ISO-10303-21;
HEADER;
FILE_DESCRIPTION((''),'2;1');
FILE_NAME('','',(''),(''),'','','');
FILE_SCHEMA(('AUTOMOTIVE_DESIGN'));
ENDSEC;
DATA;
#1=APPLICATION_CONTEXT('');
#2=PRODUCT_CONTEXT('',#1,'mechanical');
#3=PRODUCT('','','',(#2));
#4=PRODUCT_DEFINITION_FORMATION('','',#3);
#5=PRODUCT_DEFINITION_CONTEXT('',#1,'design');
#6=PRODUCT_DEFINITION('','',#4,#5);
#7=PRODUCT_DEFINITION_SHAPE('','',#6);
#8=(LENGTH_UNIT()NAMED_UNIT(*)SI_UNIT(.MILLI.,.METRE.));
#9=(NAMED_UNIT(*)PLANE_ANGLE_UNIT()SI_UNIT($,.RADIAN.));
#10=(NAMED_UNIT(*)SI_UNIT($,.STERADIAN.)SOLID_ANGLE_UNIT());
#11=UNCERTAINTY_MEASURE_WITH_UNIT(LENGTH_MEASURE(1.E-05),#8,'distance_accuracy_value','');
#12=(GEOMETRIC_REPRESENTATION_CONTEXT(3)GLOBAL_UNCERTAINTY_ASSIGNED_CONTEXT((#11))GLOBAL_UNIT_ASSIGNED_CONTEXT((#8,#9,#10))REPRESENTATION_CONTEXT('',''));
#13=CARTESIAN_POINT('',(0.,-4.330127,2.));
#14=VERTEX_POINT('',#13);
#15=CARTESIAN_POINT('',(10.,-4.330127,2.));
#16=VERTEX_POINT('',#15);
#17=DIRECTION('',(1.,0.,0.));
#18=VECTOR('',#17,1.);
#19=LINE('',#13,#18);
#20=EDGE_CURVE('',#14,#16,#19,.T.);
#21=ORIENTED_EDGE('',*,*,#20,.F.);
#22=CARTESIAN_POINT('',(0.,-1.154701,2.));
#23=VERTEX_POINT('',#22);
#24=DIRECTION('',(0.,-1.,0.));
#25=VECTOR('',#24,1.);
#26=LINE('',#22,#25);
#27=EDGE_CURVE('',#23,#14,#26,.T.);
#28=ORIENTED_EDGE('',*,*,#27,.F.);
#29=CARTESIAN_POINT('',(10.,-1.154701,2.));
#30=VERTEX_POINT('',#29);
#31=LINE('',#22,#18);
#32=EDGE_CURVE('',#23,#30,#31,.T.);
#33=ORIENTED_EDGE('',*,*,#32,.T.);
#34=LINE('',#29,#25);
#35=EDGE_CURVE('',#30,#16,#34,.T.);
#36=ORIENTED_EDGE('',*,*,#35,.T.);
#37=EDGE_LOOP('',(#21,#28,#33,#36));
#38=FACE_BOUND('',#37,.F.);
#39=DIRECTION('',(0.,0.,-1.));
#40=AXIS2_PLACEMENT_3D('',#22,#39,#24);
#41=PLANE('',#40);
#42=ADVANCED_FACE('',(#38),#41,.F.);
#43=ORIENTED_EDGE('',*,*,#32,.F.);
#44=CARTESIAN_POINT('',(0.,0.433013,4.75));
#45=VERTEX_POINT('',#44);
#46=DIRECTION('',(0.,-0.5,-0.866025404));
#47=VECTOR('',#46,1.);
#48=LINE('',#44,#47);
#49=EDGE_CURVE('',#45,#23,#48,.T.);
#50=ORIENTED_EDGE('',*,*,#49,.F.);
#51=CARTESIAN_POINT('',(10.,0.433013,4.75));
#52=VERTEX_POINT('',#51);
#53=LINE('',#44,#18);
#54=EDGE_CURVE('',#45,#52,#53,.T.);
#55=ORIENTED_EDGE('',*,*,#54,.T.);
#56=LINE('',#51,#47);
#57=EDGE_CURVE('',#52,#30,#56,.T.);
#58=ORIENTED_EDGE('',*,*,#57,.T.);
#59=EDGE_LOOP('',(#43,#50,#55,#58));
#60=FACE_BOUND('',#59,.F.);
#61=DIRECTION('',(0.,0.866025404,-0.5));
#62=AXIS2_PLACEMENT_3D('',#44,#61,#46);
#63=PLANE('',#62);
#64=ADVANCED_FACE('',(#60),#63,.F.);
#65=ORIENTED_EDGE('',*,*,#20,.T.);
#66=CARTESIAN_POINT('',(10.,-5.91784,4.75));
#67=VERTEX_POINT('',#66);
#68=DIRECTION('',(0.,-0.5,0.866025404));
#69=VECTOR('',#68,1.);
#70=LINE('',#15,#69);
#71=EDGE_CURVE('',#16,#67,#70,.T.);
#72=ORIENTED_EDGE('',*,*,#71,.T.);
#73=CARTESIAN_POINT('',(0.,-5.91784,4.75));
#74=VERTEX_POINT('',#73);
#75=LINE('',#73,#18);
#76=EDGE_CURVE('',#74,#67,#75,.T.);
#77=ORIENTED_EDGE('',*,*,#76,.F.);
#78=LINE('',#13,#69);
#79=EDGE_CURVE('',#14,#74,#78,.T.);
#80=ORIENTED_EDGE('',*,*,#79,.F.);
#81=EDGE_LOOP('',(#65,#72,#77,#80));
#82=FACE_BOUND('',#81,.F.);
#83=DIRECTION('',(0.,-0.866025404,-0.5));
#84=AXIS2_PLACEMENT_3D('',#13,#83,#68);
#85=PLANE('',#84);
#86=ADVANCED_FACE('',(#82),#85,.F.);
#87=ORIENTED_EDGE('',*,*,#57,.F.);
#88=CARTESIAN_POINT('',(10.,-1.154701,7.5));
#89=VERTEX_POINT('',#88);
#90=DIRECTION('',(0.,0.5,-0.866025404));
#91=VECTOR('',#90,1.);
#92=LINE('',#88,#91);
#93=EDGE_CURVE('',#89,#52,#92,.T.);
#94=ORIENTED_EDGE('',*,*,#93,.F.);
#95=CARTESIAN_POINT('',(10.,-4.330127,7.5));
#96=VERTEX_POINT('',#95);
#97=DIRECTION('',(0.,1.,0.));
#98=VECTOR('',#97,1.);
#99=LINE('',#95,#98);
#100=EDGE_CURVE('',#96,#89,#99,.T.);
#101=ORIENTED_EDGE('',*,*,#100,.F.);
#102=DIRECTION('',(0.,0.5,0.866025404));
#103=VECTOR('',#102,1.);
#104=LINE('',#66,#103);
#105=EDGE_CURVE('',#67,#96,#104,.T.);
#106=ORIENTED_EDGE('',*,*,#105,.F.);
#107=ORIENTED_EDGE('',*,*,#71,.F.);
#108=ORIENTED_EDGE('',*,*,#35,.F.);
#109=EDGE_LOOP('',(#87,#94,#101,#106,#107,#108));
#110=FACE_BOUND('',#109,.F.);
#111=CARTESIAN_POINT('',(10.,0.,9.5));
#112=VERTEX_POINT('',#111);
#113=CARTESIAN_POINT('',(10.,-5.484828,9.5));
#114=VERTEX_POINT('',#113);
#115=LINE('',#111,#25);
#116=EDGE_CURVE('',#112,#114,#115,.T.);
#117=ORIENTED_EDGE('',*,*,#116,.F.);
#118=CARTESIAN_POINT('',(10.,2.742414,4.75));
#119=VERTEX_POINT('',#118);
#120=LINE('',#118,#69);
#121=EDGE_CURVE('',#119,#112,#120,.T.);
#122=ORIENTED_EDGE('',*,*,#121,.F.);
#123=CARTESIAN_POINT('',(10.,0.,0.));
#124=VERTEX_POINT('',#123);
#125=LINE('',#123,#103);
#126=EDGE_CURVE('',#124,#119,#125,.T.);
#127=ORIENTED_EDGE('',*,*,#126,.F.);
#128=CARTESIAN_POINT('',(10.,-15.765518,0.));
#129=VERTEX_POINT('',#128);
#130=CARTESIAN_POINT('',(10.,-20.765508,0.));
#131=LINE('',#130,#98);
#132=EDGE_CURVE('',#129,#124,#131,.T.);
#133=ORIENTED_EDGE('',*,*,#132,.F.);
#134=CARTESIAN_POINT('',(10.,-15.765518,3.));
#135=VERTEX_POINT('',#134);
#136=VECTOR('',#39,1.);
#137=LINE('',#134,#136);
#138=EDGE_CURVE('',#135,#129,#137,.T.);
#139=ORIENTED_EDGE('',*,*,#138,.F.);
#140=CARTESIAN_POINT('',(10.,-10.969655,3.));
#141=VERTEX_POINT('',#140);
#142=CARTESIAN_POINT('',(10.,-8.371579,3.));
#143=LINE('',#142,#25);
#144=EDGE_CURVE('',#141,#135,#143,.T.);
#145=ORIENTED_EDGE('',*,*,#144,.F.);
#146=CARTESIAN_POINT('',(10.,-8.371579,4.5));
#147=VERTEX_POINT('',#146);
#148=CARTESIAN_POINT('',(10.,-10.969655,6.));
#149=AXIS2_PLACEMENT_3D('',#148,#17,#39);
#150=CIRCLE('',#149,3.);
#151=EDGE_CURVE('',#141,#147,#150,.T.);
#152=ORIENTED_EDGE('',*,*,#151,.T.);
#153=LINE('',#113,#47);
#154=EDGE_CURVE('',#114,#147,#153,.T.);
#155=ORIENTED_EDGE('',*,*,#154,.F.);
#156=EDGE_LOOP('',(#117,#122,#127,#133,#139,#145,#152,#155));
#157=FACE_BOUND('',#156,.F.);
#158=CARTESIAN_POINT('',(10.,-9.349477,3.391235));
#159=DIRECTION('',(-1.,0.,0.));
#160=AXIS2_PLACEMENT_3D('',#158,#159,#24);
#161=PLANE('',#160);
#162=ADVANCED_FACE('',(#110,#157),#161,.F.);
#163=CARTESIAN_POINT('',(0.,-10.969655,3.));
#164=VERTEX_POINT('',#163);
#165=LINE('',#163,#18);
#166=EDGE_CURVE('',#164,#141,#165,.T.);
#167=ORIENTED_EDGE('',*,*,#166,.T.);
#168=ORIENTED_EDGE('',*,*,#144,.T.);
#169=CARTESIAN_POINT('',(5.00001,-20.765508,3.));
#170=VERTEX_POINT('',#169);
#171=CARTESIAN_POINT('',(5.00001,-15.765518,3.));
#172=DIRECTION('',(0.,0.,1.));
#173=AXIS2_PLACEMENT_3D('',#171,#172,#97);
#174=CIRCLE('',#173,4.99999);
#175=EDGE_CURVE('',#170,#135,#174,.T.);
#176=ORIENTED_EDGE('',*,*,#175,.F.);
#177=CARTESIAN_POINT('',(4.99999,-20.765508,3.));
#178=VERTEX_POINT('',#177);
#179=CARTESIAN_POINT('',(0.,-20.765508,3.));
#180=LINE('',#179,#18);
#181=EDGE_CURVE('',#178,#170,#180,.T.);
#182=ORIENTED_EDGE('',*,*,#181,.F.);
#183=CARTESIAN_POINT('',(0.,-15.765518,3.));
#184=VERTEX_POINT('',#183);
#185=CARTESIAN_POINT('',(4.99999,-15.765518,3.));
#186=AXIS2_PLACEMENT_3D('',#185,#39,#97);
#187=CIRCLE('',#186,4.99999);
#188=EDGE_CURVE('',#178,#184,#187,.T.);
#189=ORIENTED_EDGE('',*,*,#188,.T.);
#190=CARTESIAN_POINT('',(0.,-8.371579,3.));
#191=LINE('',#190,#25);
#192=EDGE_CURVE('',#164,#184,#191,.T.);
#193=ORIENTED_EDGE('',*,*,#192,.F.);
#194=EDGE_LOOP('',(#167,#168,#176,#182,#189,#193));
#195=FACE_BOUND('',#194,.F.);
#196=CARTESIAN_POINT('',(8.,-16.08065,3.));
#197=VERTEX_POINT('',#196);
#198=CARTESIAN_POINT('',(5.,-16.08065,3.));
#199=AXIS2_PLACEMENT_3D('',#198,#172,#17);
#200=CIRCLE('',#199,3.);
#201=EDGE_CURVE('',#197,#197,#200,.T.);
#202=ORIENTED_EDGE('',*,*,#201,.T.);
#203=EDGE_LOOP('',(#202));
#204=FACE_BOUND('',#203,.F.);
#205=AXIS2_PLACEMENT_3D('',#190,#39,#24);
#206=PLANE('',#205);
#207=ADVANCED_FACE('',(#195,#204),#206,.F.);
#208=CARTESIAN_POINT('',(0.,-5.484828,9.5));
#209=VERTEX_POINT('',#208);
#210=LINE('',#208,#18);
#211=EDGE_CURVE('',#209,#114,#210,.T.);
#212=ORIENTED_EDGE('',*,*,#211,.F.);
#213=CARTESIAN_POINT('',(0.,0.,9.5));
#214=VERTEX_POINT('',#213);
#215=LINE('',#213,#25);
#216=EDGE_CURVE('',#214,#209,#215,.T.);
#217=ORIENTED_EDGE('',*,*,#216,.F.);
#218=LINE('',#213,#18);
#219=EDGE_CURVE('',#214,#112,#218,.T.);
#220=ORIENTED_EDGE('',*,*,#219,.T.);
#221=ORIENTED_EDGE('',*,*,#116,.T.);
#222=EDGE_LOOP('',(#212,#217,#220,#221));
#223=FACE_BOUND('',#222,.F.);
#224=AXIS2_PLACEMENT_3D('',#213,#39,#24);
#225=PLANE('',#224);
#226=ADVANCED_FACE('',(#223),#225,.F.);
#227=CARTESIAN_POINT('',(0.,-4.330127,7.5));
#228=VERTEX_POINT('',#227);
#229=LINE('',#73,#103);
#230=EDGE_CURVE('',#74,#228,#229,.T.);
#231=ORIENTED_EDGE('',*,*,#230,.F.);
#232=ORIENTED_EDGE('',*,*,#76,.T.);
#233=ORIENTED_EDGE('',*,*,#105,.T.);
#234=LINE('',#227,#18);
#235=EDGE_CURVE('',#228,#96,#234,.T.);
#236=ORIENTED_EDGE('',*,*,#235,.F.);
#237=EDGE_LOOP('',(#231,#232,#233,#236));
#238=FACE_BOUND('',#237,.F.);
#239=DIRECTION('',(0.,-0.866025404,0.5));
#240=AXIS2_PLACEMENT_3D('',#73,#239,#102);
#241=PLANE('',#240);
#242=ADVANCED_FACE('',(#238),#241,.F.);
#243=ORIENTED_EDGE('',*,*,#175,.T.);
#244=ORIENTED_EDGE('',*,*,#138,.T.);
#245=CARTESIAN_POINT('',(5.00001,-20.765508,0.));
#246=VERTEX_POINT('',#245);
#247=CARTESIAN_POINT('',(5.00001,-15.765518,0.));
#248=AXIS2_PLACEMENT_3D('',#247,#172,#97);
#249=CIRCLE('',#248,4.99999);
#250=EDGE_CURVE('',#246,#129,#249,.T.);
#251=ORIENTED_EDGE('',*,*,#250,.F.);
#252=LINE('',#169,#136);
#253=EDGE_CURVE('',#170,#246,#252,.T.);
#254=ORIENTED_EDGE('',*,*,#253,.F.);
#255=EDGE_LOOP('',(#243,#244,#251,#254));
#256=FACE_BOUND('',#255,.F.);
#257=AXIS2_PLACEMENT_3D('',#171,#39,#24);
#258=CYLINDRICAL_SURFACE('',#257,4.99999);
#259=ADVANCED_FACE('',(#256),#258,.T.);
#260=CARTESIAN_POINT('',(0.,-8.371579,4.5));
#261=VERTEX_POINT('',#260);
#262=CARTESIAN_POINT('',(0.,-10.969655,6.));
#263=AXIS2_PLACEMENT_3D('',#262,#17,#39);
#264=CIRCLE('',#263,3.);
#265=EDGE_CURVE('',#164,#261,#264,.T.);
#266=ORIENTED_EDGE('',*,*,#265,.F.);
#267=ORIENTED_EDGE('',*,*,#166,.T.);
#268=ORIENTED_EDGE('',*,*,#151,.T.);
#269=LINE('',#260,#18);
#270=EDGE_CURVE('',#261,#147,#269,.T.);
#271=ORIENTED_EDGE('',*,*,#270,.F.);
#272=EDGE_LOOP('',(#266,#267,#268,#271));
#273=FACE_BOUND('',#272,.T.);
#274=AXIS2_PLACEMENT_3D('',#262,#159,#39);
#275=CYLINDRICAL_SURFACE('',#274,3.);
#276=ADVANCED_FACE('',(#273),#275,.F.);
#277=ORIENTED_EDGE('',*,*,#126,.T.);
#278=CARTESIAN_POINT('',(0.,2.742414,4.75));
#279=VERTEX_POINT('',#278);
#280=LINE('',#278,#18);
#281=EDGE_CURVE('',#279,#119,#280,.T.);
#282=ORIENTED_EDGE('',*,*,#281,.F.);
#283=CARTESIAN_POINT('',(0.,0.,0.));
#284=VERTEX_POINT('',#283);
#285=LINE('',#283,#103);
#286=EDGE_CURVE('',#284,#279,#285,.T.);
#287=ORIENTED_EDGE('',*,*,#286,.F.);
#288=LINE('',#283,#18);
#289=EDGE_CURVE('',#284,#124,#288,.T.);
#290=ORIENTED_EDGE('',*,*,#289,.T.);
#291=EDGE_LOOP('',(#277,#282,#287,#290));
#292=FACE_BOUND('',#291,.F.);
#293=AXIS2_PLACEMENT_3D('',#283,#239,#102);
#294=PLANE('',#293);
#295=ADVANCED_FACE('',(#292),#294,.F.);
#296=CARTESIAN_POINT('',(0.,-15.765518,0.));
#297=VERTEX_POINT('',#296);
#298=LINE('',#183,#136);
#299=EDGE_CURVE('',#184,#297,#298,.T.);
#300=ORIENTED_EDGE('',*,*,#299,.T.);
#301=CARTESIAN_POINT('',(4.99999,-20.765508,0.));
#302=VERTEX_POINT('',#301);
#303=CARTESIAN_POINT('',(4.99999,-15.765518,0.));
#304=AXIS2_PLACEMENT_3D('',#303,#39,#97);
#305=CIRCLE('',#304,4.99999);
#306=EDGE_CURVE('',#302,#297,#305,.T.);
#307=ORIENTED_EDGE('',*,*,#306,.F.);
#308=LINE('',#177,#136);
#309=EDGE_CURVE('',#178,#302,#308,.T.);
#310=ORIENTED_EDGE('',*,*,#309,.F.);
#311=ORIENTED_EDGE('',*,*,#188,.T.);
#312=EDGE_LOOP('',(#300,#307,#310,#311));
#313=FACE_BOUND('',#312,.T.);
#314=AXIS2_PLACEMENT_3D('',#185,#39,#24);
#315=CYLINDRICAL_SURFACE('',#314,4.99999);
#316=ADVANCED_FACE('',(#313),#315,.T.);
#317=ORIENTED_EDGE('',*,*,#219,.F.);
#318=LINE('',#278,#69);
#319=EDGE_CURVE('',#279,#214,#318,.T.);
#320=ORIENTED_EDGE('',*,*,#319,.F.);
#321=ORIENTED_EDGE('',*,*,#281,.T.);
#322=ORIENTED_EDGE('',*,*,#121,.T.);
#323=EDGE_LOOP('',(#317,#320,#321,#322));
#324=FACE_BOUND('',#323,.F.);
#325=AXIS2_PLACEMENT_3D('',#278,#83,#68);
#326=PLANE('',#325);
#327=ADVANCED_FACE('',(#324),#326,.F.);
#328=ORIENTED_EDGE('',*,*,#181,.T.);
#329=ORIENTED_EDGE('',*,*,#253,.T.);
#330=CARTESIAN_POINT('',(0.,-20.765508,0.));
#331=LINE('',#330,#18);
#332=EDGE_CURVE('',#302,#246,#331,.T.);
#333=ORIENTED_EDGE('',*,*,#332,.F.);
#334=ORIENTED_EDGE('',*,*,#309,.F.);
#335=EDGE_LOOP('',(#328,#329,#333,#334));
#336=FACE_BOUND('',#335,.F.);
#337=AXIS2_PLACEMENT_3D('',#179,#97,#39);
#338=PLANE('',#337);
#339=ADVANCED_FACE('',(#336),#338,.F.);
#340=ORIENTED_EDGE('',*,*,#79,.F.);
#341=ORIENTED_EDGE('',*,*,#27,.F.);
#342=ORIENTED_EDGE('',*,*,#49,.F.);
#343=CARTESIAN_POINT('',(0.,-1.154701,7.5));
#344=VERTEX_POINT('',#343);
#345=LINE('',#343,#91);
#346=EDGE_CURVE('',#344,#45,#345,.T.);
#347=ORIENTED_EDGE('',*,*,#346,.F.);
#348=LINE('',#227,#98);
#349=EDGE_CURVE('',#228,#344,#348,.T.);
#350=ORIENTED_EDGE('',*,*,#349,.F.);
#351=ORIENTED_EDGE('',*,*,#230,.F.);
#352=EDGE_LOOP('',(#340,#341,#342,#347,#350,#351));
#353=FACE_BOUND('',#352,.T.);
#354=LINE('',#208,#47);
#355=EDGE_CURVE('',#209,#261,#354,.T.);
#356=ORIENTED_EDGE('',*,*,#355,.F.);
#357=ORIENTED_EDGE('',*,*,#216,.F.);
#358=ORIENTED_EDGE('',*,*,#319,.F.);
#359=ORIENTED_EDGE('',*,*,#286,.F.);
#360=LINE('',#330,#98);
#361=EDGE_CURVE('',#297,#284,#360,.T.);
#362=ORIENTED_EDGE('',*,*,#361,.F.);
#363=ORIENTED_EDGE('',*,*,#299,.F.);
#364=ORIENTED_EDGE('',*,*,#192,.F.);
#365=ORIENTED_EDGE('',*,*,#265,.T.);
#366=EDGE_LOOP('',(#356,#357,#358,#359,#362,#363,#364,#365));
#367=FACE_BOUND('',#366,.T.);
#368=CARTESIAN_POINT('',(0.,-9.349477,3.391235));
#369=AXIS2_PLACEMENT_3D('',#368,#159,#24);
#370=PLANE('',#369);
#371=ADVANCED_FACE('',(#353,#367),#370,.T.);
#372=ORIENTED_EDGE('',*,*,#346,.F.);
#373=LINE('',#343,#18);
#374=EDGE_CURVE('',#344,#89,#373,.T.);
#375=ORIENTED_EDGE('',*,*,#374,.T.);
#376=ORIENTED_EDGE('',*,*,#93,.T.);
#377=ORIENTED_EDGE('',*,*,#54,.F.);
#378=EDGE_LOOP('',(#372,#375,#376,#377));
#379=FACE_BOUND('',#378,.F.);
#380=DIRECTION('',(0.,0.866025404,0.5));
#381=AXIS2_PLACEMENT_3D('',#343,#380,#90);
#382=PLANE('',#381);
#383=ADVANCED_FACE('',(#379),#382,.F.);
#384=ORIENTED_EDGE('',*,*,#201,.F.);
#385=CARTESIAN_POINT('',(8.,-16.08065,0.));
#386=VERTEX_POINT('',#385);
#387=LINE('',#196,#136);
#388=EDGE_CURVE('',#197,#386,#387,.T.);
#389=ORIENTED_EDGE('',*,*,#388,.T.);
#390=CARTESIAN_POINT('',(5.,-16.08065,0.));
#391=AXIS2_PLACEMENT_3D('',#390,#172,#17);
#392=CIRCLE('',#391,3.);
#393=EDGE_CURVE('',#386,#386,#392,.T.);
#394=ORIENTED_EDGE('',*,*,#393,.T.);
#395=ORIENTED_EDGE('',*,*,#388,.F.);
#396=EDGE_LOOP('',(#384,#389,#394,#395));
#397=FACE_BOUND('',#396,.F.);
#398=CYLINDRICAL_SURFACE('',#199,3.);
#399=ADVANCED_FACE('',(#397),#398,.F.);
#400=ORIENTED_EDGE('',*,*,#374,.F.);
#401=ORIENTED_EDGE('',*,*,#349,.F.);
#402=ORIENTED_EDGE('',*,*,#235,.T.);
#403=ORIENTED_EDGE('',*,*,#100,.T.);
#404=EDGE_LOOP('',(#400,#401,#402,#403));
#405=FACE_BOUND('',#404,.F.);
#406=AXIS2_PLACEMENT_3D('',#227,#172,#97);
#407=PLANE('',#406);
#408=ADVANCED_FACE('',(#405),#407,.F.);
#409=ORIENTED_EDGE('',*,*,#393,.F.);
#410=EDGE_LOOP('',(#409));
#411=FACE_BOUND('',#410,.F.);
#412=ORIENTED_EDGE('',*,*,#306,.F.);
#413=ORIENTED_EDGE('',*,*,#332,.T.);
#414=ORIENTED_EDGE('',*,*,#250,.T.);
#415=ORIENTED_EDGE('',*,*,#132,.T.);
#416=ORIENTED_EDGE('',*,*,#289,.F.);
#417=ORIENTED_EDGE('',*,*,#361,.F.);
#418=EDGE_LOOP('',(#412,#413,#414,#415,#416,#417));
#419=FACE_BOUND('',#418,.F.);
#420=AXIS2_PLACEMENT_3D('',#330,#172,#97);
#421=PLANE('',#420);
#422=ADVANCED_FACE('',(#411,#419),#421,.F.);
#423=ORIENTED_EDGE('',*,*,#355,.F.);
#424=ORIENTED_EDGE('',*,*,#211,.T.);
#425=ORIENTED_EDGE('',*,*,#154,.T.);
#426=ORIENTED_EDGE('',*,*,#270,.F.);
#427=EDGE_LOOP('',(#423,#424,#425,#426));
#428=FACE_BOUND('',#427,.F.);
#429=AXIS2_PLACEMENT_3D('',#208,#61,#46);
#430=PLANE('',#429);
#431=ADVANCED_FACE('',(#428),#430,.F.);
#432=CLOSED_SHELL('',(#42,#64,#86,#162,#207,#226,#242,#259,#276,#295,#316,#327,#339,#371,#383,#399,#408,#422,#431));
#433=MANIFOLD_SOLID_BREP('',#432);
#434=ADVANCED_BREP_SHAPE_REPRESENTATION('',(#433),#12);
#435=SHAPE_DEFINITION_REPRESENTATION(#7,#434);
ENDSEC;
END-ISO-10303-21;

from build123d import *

# Parameters (mm, degrees)
F1_DEPTH    = 10
F2_R        = 3
F3_DEPTH    = 25
F4_R        = 4.99999
F5_T1_DEPTH = 10


# Not quite as in the source:
# - a fillet or chamfer that OpenCascade refuses, or shapes differently, is made with other operations: its cross-section is extruded or revolved along the edge and cut away or added
# - a fillet or chamfer is up to 0.001 mm smaller than in the source, because OpenCascade refuses the exact size


with BuildPart() as f1:
    # F0 (on Right) → F1 (new body)
    with BuildSketch(Plane.YZ):
        Polygon((-20.7655076647, 0), (0, 0), (2.7424137787, 4.75), (0, 9.5), (-5.4848275573, 9.5), (-8.3715789032, 4.5), (-8.3715789032, 3), (-20.7655076647, 3), align=None)
        Polygon((-4.3301270189, 2), (-5.9178402592, 4.75), (-4.3301270189, 7.5), (-1.1547005384, 7.5), (0.4330127019, 4.75), (-1.1547005384, 2), align=None, mode=Mode.SUBTRACT)
    extrude(amount=F1_DEPTH)

    # F2 (on face) → F3 (cut)
    with BuildSketch(Plane.XY.offset(3)):
        with Locations((5, -16.0806495696)):
            Circle(F2_R)
    extrude(amount=-F3_DEPTH, mode=Mode.SUBTRACT)

    # F4 (radius 5 in the source; OpenCascade refuses exactly that, so slightly less here)
    f4_edges = [f1.edges().sort_by_distance(p)[0] for p in [
        (0, -20.765508, 1.5),
        (10, -20.765508, 1.5),
    ]]
    fillet(f4_edges, radius=F4_R)

    # F5: fillet of radius 3 on 1 edges, made by hand

    # F5_s2 → F5_t1 (join)
    with BuildSketch(Plane.YZ):
        with BuildLine():
            ThreePointArc((-10.9696551146, 3), (-9.4696551146, 3.4019237886), (-8.3715789032, 4.5))
            Line((-8.3715789032, 4.5), (-8.3715789032, 3))
            Line((-8.3715789032, 3), (-10.9696551146, 3))
        make_face()
    extrude(amount=F5_T1_DEPTH)


solid = f1.part
